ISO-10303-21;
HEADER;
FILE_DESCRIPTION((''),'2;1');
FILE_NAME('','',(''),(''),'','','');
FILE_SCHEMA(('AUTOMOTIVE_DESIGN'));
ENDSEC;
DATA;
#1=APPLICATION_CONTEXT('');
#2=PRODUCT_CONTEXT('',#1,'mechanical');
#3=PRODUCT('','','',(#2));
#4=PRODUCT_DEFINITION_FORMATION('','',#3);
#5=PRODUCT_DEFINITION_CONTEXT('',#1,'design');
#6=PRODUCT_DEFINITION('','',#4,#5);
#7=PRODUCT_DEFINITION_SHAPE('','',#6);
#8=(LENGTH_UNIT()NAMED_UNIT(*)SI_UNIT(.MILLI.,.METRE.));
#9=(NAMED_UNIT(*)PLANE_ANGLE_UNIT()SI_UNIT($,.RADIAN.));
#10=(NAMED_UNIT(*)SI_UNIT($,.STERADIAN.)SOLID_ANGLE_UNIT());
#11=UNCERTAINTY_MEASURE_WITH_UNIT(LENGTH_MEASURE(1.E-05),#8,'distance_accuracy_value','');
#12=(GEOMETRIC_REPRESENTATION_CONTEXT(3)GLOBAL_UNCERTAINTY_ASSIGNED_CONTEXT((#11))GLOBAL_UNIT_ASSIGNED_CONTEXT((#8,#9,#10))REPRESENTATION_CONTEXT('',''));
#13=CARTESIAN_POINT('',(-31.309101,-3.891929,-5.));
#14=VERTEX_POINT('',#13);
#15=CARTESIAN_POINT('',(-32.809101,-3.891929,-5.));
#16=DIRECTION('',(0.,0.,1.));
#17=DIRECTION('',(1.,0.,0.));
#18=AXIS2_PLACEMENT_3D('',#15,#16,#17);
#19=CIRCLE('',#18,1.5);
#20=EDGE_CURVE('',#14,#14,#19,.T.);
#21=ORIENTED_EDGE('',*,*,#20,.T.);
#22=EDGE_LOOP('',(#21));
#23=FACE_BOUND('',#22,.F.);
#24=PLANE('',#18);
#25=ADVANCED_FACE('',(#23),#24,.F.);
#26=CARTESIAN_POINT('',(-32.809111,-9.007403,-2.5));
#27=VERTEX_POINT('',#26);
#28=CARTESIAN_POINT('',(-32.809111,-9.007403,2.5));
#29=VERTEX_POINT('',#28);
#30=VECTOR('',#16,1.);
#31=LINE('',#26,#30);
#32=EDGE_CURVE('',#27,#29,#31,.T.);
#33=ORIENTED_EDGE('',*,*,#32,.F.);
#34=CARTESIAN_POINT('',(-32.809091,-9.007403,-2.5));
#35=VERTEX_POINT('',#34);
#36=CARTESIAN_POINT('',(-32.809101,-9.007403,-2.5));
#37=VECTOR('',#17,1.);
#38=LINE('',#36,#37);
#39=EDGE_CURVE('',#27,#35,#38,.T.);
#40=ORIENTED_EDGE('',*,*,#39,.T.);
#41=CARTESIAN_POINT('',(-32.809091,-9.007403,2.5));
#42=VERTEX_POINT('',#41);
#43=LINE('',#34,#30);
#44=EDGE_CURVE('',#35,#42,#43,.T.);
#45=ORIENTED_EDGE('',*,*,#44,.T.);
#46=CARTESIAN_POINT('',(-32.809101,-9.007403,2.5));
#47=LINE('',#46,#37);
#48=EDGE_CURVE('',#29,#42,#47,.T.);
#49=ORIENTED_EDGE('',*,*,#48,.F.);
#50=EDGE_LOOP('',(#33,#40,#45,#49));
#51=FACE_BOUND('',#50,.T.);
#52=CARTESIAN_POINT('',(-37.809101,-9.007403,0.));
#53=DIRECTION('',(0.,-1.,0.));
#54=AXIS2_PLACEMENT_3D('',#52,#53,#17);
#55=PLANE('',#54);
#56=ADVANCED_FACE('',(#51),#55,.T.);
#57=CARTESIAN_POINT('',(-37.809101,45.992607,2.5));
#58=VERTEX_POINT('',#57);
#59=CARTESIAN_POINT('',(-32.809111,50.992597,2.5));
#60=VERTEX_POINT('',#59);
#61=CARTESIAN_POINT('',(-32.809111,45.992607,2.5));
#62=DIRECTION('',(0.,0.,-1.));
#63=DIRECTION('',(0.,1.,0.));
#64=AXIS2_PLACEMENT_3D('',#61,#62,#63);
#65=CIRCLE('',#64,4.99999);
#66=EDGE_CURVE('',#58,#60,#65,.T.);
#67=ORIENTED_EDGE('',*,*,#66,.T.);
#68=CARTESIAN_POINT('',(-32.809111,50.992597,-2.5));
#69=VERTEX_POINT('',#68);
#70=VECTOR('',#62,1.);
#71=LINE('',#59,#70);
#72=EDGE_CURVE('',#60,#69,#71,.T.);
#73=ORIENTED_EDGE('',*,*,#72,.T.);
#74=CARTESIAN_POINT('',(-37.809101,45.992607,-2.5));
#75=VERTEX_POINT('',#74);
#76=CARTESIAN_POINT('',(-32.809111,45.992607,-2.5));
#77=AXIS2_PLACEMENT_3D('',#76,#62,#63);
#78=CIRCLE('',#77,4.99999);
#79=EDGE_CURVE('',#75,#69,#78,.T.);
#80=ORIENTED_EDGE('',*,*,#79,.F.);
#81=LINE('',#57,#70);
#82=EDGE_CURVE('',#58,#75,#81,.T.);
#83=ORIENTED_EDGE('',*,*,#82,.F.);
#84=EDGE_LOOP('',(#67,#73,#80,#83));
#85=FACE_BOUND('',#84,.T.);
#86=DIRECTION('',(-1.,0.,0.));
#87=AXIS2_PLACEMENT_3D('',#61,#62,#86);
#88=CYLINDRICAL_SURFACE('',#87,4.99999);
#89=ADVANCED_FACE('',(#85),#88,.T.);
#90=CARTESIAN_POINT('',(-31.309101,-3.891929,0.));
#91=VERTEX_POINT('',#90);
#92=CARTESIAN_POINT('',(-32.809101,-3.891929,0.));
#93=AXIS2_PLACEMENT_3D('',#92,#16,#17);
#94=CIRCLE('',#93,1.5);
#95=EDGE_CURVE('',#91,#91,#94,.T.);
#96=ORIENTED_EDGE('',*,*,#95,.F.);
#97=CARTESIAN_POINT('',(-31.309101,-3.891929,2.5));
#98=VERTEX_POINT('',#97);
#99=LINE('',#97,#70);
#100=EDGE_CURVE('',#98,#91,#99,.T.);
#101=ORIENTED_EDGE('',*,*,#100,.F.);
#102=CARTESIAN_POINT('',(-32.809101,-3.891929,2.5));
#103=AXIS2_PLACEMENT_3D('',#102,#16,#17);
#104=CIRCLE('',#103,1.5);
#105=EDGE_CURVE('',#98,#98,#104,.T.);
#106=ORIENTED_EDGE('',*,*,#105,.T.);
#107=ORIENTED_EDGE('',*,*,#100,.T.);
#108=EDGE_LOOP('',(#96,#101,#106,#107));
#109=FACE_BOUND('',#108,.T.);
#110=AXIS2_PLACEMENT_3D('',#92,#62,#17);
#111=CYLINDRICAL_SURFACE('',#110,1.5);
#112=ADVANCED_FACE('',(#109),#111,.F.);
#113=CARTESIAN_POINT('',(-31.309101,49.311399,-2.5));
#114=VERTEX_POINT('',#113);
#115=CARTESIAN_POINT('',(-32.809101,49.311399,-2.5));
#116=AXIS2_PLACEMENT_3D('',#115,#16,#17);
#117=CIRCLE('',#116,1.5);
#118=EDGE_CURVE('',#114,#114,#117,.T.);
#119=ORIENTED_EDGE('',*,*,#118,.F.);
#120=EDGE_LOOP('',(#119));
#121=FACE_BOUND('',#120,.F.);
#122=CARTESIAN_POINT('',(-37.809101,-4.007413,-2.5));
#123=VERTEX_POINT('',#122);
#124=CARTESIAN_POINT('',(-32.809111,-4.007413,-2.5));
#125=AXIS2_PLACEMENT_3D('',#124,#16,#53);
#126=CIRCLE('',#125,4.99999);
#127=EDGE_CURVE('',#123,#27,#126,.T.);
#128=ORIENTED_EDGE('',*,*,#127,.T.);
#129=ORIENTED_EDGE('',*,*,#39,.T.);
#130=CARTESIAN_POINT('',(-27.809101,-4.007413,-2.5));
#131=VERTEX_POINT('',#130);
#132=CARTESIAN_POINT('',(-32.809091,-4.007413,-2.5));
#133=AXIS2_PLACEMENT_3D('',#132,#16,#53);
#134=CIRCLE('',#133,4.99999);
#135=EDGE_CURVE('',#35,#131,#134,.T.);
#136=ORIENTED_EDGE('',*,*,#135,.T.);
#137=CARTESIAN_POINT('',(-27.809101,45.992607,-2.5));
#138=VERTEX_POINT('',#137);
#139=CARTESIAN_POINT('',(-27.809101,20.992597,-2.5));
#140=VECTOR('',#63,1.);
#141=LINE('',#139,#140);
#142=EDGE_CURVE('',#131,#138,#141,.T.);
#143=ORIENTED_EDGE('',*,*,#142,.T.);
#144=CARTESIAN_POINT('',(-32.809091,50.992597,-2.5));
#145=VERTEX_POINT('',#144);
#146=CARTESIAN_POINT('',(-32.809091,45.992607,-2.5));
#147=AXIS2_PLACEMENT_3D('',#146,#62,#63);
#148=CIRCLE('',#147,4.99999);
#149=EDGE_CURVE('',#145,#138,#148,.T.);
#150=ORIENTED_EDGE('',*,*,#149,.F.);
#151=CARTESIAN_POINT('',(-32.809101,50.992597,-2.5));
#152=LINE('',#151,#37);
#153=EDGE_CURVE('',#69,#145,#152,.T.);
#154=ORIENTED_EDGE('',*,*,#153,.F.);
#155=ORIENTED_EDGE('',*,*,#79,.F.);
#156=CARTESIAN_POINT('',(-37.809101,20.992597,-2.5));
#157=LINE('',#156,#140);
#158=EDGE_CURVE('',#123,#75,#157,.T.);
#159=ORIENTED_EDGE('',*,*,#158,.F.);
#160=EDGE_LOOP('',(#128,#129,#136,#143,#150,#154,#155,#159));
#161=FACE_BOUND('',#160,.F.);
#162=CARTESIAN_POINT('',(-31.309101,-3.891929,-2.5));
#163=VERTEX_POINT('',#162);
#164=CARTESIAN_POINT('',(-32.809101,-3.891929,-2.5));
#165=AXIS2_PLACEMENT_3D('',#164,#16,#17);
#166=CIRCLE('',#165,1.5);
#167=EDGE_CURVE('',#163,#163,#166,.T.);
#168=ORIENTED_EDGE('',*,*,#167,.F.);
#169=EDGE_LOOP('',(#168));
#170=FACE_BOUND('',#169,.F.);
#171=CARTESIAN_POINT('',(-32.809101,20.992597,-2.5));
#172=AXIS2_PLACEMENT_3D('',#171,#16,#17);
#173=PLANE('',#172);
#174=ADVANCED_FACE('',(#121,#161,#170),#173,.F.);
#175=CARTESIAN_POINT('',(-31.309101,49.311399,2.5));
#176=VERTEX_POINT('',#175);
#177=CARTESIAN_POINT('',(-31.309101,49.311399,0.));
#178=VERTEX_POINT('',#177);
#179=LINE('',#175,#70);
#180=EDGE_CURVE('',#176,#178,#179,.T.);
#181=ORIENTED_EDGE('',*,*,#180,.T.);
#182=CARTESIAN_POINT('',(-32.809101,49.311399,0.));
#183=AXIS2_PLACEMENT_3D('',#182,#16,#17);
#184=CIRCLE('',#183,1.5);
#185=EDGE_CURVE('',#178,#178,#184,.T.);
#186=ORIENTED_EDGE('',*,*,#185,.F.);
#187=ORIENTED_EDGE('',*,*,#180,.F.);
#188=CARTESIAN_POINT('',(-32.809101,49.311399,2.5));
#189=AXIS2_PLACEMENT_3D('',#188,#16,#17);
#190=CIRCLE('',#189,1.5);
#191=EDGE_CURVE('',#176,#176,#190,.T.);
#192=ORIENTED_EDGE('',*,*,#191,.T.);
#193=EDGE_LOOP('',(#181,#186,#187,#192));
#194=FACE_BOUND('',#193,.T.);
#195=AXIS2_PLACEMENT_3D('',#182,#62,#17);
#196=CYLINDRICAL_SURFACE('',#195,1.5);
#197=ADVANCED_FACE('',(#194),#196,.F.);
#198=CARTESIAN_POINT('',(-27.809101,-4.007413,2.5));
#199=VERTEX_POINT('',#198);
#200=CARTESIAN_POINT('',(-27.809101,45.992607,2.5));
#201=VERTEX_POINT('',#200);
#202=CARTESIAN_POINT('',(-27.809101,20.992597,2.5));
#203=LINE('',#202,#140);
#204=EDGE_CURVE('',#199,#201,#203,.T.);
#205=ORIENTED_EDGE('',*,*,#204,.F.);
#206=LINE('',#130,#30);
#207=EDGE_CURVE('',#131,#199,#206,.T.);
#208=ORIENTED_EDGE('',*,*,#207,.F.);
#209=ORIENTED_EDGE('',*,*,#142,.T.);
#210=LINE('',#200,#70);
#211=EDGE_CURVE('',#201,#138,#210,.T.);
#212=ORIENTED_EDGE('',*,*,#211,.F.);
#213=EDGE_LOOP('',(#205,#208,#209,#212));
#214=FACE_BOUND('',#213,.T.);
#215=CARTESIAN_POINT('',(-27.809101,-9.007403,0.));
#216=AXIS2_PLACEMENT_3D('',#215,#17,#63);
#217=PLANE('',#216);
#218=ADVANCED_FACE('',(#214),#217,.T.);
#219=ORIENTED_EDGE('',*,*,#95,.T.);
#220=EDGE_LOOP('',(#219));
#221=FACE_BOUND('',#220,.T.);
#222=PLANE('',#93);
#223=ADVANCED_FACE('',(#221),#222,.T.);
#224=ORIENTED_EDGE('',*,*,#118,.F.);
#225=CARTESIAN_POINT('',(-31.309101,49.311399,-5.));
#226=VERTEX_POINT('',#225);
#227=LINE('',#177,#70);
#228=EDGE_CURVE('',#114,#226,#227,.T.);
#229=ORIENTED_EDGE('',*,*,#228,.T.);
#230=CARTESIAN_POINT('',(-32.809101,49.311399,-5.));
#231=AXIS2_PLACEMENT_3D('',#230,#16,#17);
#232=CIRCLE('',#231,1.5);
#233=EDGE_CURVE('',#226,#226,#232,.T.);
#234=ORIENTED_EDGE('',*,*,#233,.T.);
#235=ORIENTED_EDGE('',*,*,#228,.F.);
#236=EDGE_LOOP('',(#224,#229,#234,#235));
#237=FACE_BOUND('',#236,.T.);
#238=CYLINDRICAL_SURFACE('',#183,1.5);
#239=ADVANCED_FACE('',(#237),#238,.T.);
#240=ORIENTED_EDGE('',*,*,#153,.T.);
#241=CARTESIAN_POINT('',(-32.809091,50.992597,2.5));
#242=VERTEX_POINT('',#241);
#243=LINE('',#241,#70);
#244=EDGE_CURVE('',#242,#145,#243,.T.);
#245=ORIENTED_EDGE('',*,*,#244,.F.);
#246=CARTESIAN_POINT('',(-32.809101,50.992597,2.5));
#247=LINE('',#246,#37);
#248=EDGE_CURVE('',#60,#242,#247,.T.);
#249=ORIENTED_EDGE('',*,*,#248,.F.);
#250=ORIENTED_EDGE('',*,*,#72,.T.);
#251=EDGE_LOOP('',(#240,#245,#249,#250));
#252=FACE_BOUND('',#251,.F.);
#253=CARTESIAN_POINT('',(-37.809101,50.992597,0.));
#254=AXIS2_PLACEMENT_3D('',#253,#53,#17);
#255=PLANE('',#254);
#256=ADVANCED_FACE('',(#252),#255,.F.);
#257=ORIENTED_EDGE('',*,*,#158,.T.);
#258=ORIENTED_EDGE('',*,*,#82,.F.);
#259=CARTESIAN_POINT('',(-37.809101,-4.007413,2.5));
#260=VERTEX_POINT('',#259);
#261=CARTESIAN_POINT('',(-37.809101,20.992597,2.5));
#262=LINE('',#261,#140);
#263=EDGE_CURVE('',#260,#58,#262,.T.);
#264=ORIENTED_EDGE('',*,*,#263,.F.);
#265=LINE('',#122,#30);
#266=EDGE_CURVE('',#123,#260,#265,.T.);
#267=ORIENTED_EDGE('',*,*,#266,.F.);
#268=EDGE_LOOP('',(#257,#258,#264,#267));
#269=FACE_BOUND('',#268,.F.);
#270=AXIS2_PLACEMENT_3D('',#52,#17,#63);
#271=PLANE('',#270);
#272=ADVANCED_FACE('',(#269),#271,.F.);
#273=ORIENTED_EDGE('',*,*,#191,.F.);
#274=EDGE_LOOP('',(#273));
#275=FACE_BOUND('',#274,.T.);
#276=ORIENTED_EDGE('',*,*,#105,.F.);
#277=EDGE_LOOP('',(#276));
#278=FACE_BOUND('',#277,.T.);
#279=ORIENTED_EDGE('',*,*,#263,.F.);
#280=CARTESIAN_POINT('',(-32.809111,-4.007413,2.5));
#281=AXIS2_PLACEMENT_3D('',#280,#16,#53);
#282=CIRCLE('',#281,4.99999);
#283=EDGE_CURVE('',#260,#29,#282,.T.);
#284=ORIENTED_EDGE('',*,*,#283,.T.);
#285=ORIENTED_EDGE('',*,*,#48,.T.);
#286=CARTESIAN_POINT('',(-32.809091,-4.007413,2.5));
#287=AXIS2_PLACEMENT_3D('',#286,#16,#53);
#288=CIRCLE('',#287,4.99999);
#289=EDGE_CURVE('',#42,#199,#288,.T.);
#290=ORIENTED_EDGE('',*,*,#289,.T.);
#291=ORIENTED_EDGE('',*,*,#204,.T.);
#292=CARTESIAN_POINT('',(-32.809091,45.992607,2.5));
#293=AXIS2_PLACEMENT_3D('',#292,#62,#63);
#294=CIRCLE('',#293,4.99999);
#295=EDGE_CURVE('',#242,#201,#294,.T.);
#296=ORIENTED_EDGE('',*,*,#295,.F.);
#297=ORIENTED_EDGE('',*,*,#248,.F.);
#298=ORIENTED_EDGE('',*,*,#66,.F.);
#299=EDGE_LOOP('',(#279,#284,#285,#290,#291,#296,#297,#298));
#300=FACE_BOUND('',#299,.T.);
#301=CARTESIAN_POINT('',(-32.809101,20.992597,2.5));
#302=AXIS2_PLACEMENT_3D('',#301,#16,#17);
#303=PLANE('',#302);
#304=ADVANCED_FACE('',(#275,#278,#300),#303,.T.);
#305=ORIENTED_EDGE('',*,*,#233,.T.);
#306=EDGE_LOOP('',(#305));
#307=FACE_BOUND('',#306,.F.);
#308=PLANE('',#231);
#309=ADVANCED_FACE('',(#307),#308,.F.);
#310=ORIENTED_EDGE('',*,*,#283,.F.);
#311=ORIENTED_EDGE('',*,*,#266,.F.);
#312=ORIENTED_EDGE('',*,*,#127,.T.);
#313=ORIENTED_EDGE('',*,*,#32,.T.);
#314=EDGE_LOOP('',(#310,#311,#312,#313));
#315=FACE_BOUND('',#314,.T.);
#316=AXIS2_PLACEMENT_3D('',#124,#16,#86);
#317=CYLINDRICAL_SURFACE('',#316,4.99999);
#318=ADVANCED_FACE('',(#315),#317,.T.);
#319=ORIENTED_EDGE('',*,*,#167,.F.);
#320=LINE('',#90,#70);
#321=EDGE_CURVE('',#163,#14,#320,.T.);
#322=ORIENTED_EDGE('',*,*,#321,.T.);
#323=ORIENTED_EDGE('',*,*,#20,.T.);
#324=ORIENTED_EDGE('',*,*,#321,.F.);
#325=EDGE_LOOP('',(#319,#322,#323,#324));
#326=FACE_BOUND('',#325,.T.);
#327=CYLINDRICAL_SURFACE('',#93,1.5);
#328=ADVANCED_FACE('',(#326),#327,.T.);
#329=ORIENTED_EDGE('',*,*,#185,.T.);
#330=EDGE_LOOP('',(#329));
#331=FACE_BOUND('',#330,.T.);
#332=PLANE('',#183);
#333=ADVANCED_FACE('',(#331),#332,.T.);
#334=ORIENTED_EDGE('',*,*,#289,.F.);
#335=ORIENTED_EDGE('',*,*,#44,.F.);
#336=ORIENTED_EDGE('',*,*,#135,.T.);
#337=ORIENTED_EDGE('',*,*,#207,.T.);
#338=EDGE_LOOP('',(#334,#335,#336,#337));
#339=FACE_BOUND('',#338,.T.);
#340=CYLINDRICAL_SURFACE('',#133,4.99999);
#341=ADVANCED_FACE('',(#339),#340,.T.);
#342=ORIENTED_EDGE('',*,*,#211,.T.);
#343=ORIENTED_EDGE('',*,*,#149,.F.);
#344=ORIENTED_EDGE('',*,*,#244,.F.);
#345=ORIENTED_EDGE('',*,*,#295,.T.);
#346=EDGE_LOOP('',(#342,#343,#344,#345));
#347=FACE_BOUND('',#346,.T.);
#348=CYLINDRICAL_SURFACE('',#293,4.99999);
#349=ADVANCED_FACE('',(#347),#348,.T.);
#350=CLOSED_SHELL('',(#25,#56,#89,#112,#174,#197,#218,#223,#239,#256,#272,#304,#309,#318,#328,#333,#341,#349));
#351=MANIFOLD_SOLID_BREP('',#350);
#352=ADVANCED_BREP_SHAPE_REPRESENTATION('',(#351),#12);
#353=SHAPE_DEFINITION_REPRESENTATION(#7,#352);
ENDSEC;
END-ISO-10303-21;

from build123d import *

# Parameters (mm, degrees)
F0_W     = 10
F0_H     = 60
F0_R     = 1.5
F1_DEPTH = 2.5
F2_DEPTH = 5
F3_R     = 4.99999


# Not quite as in the source:
# - a fillet or chamfer is up to 0.001 mm smaller than in the source, because OpenCascade refuses the exact size


with BuildPart() as f1:
    # F0 (on Top) → F1 (new body, symmetric)
    with BuildSketch(Plane.XY):
        with Locations((-32.8091010451, 20.9925968945)):
            Rectangle(F0_W, F0_H)
        with Locations((-32.8091010451, -3.8919287648)):
            Circle(F0_R, mode=Mode.SUBTRACT)
        with Locations((-32.8091010451, 49.3113994598)):
            Circle(F0_R, mode=Mode.SUBTRACT)
    extrude(amount=F1_DEPTH, both=True)

    # F0 (on Top) → F2 (join)
    with BuildSketch(Plane.XY):
        with Locations((-32.8091010451, 49.3113994598)):
            Circle(F0_R)
        with Locations((-32.8091010451, -3.8919287648)):
            Circle(F0_R)
    extrude(amount=-F2_DEPTH)

    # F3 (radius 5 in the source; OpenCascade refuses exactly that, so slightly less here)
    f3_edges = [f1.edges().sort_by_distance(p)[0] for p in [
        (-27.809101, 50.992597, 0),
        (-37.809101, 50.992597, 0),
        (-27.809101, -9.007403, 0),
        (-37.809101, -9.007403, 0),
    ]]
    fillet(f3_edges, radius=F3_R)


solid = f1.part
